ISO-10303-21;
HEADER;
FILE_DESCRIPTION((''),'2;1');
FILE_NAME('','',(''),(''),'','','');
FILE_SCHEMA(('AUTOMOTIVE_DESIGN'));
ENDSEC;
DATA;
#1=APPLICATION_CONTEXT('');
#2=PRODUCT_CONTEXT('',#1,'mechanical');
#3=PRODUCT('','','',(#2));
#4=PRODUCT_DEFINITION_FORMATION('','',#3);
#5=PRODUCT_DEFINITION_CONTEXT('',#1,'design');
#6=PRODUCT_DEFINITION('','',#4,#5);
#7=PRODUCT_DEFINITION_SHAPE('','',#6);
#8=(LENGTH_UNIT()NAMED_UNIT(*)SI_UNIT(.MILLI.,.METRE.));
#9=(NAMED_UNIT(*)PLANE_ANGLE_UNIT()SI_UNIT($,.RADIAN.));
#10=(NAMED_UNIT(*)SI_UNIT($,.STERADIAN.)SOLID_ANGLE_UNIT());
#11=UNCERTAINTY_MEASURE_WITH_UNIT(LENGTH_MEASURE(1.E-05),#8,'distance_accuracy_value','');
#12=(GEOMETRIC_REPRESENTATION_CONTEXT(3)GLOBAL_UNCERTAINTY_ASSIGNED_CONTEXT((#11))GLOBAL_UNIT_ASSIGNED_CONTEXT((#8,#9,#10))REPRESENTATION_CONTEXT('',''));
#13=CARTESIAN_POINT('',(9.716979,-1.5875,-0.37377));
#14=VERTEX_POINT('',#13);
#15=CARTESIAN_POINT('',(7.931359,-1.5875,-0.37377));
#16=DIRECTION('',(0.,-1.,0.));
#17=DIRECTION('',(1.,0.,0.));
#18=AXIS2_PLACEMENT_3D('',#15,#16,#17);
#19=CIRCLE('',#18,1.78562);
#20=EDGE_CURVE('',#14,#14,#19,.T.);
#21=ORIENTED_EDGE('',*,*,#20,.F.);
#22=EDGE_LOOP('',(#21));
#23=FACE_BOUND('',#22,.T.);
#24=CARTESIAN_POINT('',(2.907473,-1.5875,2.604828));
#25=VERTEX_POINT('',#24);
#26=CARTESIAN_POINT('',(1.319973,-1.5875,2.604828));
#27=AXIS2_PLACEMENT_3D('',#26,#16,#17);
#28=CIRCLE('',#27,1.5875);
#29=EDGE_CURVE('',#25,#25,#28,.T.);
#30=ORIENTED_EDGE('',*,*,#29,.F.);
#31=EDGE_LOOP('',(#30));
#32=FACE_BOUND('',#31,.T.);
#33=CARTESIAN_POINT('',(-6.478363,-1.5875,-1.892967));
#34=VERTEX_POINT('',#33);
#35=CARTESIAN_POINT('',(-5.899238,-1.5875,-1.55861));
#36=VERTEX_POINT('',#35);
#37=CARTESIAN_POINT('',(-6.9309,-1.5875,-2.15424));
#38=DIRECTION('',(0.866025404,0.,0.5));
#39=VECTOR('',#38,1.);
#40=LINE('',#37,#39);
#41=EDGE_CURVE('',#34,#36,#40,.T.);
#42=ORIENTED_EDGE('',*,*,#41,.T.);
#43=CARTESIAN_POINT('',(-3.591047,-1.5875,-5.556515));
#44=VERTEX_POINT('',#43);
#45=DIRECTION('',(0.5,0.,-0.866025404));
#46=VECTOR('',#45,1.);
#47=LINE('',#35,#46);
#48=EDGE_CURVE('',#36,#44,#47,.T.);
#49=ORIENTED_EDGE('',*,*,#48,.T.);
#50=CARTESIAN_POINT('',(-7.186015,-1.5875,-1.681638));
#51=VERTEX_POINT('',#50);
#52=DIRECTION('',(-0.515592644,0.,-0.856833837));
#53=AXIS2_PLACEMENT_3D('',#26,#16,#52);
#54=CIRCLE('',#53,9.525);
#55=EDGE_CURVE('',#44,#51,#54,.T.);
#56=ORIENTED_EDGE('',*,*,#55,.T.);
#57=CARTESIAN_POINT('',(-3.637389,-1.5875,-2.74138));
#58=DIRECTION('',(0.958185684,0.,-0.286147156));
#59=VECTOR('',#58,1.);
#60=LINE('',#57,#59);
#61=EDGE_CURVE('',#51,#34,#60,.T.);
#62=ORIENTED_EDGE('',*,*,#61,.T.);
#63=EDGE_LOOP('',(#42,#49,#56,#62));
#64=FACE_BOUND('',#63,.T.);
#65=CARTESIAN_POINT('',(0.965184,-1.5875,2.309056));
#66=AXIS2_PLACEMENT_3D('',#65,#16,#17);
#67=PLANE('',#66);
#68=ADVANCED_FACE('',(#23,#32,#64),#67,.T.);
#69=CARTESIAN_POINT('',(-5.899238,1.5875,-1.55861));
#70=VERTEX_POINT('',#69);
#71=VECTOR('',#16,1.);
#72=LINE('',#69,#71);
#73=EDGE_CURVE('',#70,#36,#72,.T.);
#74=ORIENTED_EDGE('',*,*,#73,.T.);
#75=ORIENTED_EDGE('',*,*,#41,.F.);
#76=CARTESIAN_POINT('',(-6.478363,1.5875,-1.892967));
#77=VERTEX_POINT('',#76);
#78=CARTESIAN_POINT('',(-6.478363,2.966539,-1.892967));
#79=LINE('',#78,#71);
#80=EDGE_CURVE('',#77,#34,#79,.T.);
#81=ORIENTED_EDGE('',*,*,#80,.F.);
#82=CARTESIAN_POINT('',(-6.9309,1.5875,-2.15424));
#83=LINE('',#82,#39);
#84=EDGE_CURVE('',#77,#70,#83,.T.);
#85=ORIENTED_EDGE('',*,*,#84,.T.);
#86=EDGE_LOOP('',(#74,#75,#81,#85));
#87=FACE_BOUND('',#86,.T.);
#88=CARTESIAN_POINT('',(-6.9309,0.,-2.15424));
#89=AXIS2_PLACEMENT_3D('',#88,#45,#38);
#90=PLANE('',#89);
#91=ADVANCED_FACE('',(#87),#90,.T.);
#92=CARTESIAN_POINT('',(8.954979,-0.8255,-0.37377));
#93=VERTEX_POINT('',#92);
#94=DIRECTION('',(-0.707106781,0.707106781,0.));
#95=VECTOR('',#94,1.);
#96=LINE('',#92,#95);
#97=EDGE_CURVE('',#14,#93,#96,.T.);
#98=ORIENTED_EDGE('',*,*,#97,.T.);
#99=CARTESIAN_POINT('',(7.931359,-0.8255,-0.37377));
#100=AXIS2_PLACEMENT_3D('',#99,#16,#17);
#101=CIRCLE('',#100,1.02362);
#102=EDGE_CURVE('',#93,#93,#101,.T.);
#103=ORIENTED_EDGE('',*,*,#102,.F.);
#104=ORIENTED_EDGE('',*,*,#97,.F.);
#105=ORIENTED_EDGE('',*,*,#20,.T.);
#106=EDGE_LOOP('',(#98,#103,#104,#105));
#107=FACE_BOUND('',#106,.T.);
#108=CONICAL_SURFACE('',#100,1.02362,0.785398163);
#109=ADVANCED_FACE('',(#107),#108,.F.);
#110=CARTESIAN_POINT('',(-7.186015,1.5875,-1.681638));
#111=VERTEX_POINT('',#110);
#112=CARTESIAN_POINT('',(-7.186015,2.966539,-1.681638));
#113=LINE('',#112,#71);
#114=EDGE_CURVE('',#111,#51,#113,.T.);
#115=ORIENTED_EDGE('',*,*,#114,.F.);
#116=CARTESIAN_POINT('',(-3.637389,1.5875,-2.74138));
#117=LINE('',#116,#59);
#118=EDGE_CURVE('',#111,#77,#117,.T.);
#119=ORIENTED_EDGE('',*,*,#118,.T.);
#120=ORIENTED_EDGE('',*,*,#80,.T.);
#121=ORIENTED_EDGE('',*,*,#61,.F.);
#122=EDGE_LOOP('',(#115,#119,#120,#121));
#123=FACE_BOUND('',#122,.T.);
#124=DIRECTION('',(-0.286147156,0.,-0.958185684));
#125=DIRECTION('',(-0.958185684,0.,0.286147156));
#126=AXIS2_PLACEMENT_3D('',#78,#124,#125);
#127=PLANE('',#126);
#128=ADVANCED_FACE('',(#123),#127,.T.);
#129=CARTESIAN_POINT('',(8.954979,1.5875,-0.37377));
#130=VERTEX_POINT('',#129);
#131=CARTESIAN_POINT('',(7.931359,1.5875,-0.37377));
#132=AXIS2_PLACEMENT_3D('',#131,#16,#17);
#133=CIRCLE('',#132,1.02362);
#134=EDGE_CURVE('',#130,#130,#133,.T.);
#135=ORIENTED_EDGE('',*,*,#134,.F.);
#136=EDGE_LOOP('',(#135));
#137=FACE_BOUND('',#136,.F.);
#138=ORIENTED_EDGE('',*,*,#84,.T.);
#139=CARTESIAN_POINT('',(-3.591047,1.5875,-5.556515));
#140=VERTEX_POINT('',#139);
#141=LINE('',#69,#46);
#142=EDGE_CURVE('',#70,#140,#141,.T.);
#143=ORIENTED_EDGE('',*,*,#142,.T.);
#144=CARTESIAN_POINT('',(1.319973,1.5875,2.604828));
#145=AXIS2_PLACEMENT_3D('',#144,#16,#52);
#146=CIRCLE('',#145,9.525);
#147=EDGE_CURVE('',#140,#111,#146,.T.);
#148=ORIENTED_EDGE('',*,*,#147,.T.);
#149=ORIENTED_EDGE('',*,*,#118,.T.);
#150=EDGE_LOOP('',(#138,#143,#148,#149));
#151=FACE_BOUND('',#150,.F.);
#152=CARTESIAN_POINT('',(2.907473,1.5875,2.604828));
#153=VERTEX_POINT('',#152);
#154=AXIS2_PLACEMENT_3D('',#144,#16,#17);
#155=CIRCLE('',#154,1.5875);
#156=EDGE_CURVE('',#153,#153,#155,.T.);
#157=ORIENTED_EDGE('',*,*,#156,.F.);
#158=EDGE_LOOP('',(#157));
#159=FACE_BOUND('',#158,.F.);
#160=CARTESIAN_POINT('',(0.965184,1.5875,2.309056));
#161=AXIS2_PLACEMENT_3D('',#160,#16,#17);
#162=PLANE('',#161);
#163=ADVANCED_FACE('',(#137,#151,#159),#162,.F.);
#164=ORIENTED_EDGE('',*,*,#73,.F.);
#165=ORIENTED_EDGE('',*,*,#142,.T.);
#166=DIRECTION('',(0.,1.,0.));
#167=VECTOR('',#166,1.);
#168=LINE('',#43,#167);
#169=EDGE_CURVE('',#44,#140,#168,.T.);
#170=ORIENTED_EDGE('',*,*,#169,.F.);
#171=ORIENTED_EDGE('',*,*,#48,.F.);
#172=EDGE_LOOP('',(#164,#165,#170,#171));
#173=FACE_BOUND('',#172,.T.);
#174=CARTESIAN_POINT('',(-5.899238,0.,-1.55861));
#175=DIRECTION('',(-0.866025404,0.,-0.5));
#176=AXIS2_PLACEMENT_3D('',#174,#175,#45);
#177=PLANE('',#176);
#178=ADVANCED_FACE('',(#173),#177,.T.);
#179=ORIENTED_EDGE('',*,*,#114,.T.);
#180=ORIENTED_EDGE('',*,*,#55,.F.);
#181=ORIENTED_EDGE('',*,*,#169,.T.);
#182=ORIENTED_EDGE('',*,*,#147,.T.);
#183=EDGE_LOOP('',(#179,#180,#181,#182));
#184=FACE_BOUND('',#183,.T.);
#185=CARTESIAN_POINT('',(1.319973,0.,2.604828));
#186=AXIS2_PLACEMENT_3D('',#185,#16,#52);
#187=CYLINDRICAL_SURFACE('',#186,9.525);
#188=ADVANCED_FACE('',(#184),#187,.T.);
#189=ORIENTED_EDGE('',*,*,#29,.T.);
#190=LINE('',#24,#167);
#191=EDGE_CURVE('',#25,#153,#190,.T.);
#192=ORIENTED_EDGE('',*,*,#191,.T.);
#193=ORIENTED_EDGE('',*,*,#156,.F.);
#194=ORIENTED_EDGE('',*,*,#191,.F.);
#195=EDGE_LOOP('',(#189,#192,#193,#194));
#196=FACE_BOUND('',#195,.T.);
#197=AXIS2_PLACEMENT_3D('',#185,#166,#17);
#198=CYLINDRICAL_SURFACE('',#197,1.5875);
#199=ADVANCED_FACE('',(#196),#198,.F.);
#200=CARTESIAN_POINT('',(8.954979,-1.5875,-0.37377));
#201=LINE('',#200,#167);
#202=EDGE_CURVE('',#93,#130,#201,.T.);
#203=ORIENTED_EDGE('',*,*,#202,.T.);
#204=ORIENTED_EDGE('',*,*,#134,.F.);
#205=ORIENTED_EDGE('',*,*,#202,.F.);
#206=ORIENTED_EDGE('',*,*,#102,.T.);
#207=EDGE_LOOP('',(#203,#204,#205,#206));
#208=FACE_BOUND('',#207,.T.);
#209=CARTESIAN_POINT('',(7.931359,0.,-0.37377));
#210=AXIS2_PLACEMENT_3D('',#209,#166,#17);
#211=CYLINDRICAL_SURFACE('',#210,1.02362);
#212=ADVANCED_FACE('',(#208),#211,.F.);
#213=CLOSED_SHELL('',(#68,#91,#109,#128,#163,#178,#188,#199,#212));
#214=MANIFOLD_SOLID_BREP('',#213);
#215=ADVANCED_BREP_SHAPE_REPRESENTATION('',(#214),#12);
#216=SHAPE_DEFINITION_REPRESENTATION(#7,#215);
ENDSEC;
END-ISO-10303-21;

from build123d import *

# Parameters (mm, degrees)
F0_R        = 1.02362
F0_R_2      = 1.5875
F1_DEPTH    = 1.5875
F2_SIZE2    = 0.762
F2_SIZE     = 0.762
F3_T1_DEPTH = 5.9330773534


# Not quite as in the source:
# - a fillet or chamfer that OpenCascade refuses, or shapes differently, is made with other operations: its cross-section is extruded or revolved along the edge and cut away or added


with BuildPart() as f1:
    # F0 (on Front) → F1 (new body, symmetric)
    with BuildSketch(Plane.XZ):
        with BuildLine():
            Line((-6.9308998718, -2.1542398912), (-5.8992384492, -1.5586098912))
            Line((-5.8992384492, -1.5586098912), (-3.5910470257, -5.5565147104))
            ThreePointArc((-3.5910470257, -5.5565147104), (8.1172314393, 9.2773759439), (-6.9308998718, -2.1542398912))
        make_face()
        with Locations((7.9313591488, -0.3737701657)):
            Circle(F0_R, mode=Mode.SUBTRACT)
        with Locations((1.3199729119, 2.6048275917)):
            Circle(F0_R_2, mode=Mode.SUBTRACT)
    extrude(amount=F1_DEPTH, both=True)

    # F2
    f2_edges = [f1.edges().sort_by_distance(p)[0] for p in [
        (6.907739, -1.5875, -0.37377),
    ]]
    chamfer(f2_edges, length=F2_SIZE, length2=F2_SIZE2)

    # F3: chamfer of 0.508 on 1 edges, made by hand

    # F3_s2 → F3_t1 (cut)
    with BuildSketch(Plane.XZ.offset(-2.9665386767)):
        with BuildLine():
            Line((-6.4783627065, -1.892967437), (-7.1860154174, -1.6816380318))
            ThreePointArc((-7.1860154174, -1.6816380318), (-7.0651975677, -1.9134177566), (-6.9308998718, -2.1542398912))
            Line((-6.9308998718, -2.1542398912), (-6.4783627065, -1.892967437))
        make_face()
    extrude(amount=F3_T1_DEPTH, mode=Mode.SUBTRACT)


solid = f1.part
